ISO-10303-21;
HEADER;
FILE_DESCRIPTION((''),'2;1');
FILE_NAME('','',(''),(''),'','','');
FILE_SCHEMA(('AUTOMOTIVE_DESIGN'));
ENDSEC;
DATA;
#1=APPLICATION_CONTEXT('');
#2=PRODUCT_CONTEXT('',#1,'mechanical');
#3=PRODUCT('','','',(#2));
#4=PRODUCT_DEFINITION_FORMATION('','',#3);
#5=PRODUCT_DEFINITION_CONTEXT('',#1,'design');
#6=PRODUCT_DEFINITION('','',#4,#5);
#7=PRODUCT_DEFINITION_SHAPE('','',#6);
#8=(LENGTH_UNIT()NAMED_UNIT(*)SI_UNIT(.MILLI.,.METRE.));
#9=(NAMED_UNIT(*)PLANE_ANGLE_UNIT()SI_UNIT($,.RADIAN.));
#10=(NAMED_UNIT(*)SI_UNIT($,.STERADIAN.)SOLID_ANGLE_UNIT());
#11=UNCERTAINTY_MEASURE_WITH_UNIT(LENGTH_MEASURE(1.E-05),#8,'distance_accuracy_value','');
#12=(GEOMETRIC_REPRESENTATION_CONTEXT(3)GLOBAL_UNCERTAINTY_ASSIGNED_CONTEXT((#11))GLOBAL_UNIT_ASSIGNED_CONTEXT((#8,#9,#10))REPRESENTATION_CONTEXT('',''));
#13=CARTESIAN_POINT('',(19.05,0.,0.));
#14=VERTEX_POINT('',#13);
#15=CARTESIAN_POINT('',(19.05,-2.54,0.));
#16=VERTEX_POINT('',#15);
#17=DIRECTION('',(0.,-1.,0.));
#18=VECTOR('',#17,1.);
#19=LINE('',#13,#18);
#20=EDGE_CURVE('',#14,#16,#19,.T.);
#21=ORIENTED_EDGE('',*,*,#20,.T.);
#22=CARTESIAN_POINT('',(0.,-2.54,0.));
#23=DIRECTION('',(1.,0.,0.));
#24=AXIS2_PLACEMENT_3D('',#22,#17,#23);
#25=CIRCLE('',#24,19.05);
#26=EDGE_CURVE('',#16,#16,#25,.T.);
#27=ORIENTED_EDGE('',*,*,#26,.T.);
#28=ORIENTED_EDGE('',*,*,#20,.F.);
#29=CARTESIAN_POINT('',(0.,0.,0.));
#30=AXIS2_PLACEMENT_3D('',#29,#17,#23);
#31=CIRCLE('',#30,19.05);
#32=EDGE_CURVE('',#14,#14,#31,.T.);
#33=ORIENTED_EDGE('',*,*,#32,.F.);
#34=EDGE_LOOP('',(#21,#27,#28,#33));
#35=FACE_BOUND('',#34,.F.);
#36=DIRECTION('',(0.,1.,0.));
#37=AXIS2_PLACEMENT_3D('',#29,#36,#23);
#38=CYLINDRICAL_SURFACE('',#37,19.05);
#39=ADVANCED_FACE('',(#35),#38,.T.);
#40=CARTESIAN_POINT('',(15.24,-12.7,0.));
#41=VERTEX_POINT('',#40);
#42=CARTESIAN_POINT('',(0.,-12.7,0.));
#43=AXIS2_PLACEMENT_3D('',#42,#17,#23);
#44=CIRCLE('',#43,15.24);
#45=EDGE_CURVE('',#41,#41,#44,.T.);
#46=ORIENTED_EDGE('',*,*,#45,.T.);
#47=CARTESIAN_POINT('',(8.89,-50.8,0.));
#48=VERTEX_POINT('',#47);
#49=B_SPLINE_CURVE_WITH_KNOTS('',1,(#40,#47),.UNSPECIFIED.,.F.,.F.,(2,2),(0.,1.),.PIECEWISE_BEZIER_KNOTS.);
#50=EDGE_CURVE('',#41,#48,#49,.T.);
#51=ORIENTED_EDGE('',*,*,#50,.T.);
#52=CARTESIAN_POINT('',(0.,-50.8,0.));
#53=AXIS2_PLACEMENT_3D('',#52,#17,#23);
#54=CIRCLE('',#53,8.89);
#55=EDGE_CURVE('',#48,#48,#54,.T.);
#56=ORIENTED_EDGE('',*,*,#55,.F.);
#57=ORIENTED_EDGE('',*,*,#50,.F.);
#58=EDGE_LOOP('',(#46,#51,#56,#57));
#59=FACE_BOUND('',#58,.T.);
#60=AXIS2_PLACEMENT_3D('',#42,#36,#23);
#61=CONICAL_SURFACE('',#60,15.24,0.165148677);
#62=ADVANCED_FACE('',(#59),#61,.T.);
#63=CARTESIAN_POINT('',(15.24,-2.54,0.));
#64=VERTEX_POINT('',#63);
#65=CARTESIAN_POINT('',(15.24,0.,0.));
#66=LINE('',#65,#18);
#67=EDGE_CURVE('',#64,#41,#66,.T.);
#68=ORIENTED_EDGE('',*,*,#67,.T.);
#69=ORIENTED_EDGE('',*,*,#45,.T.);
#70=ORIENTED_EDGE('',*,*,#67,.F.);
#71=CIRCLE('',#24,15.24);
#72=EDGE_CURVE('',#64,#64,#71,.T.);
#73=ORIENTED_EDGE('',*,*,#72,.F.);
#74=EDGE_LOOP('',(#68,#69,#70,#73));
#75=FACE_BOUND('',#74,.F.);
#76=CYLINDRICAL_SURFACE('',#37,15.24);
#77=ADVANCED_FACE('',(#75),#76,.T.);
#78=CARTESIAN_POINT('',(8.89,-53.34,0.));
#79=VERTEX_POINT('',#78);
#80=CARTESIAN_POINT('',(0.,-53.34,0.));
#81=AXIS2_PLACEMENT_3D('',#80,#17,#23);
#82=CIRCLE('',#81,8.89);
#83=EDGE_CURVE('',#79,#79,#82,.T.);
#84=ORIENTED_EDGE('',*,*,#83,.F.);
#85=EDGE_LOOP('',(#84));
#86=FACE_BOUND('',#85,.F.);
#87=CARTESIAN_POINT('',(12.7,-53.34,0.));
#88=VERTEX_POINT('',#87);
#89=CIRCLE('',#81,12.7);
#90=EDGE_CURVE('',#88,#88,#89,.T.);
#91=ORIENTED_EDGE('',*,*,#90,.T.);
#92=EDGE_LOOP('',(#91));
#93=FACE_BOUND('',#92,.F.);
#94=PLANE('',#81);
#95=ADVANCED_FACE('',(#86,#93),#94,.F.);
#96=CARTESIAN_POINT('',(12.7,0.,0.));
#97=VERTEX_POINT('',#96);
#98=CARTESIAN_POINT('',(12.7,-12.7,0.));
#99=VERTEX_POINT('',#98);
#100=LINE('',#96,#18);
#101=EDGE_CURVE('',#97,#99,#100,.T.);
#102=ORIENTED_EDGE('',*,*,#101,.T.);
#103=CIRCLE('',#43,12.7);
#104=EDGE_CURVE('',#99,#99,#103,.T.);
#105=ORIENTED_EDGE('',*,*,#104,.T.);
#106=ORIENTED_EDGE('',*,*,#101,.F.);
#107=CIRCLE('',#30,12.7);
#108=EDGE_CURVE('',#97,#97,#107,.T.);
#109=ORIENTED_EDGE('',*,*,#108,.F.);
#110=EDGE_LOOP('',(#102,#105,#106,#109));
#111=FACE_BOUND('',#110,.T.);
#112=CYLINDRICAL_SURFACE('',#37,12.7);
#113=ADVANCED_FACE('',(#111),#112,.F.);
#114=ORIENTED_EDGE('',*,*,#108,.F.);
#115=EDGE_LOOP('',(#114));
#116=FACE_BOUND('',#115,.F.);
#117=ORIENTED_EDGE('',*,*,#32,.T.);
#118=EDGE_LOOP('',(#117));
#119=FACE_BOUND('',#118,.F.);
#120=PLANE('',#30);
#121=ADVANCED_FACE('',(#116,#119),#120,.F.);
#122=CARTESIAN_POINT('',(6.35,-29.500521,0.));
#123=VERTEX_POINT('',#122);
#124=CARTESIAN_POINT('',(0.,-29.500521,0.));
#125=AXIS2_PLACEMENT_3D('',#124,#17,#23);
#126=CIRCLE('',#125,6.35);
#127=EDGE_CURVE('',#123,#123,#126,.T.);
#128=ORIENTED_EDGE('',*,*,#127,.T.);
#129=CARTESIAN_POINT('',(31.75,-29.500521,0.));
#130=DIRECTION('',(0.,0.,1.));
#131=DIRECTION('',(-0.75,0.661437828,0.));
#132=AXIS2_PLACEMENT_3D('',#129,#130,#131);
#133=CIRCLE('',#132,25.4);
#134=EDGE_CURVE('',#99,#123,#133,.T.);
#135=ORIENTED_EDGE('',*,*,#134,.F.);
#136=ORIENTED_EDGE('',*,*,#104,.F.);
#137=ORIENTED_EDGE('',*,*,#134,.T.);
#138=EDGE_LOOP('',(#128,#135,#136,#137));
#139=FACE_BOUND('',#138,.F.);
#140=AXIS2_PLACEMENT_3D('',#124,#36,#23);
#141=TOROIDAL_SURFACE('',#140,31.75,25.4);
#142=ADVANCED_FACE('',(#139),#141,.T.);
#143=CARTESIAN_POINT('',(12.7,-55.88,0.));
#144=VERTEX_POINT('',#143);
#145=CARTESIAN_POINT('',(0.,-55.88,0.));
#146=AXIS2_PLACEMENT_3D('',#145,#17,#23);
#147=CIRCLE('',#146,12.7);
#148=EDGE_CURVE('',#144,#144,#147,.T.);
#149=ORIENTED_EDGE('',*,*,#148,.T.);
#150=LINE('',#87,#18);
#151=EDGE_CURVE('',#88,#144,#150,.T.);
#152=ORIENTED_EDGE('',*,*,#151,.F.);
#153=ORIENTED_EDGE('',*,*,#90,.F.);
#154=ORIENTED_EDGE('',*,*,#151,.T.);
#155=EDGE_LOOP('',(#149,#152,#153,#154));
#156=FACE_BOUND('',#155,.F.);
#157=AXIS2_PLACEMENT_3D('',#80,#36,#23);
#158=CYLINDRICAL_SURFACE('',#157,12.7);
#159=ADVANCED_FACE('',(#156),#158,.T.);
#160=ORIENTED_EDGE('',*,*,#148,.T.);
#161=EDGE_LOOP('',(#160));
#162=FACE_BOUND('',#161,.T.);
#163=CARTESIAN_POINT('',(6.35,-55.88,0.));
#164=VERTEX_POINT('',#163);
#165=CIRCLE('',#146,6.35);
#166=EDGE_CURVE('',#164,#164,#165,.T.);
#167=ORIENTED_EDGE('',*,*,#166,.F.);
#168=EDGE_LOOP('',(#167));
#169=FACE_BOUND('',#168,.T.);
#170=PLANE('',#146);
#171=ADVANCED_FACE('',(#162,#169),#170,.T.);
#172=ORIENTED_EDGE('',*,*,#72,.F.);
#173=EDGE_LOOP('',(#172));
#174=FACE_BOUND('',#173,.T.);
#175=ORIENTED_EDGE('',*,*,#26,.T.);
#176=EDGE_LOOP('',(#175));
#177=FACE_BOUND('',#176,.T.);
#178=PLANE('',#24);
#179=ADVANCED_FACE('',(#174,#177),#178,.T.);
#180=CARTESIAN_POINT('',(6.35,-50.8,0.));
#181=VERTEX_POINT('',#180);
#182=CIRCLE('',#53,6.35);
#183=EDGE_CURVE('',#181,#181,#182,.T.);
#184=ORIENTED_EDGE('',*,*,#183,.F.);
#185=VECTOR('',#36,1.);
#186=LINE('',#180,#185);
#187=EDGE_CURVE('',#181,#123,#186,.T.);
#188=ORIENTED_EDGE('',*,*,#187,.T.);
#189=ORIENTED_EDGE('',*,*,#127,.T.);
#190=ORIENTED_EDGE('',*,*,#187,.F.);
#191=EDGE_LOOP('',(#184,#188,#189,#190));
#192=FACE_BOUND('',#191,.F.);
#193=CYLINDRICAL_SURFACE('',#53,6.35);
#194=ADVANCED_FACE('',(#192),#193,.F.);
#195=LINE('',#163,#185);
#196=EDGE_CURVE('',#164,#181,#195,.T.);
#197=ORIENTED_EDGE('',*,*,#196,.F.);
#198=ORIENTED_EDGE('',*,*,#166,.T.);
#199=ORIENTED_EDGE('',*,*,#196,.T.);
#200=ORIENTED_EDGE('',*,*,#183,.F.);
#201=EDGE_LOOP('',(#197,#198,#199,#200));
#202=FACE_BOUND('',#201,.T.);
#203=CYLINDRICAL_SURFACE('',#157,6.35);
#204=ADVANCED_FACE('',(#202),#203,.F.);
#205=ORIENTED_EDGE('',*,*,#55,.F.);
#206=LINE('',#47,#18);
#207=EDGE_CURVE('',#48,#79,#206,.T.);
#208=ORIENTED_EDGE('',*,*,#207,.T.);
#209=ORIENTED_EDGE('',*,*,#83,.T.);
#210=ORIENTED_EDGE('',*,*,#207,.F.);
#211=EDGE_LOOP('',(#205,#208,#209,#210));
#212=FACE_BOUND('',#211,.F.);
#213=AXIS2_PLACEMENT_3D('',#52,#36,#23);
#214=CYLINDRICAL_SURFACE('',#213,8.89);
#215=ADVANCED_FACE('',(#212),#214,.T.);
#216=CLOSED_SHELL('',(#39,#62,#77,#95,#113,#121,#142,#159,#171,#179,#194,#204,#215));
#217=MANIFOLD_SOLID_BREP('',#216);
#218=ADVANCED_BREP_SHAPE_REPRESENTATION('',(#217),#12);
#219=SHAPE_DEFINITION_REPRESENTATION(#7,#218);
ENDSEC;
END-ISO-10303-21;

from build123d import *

# Parameters (mm, degrees)
F0_R      = 15.24
F0_R_2    = 12.7
F1_DEPTH  = 12.7
F0_R_3    = 19.05
F2_DEPTH  = 2.54
F5_R      = 15.24
F4_R      = 8.89
F7_R      = 8.89
F7_R_2    = 6.35
F8_DEPTH  = 2.54
F9_R      = 12.7
F9_R_2    = 6.35
F10_DEPTH = 2.54
F11_DEPTH = 41.402


# Not quite as in the source:
# - a fillet or chamfer that OpenCascade refuses, or shapes differently, is made with other operations: its cross-section is extruded or revolved along the edge and cut away or added


with BuildPart() as f1:
    # F0 (on Front) → F1 (new body)
    with BuildSketch(Plane.XZ):
        Circle(F0_R)
        Circle(F0_R_2, mode=Mode.SUBTRACT)
    extrude(amount=F1_DEPTH)

    # F0 (on Front) → F2 (join)
    with BuildSketch(Plane.XZ):
        Circle(F0_R_3)
        Circle(F0_R, mode=Mode.SUBTRACT)
    extrude(amount=F2_DEPTH)

    # F5 (on face) → F6 section 0
    with BuildSketch(Plane.XZ.offset(12.7)):
        Circle(F5_R)
    # F4 (on offset) → F6 section 1
    with BuildSketch(Plane.XZ.offset(50.8)):
        Circle(F4_R)
    loft()

    # F7 (on face) → F8 (join)
    with BuildSketch(Plane.XZ.offset(50.8)):
        Circle(F7_R)
        Circle(F7_R_2, mode=Mode.SUBTRACT)
    extrude(amount=F8_DEPTH)

    # F9 (on face) → F10 (join)
    with BuildSketch(Plane.XZ.offset(53.34)):
        Circle(F9_R)
        Circle(F9_R_2, mode=Mode.SUBTRACT)
    extrude(amount=F10_DEPTH)

    # F11 (cut): a face of the model
    f11_faces = [f1.faces().sort_by_distance(p)[0] for p in [
        (0, -50.8, 0),
    ]]
    extrude(f11_faces, amount=-F11_DEPTH, mode=Mode.SUBTRACT)

    # F12: fillet of radius 25.4 on 1 edges, made by hand

    # F12_s1 → F12_t2 (revolve, cut)
    with BuildSketch(Plane.XY):
        with BuildLine():
            ThreePointArc((12.7, -12.7), (7.990475594, -20.5202647042), (6.35, -29.5005208253))
            Line((6.35, -29.5005208253), (5.842, -29.5005208253))
            Line((5.842, -29.5005208253), (5.842, -12.7))
            Line((5.842, -12.7), (6.35, -12.192))
            ThreePointArc((6.35, -12.192), (9.525, -12.192), (12.319, -12.3639895835))
            Line((12.319, -12.3639895835), (12.7, -12.7))
        make_face()
    revolve(axis=Axis((0, -12.7, 0), (0, -1, 0)), mode=Mode.SUBTRACT)


solid = f1.part
